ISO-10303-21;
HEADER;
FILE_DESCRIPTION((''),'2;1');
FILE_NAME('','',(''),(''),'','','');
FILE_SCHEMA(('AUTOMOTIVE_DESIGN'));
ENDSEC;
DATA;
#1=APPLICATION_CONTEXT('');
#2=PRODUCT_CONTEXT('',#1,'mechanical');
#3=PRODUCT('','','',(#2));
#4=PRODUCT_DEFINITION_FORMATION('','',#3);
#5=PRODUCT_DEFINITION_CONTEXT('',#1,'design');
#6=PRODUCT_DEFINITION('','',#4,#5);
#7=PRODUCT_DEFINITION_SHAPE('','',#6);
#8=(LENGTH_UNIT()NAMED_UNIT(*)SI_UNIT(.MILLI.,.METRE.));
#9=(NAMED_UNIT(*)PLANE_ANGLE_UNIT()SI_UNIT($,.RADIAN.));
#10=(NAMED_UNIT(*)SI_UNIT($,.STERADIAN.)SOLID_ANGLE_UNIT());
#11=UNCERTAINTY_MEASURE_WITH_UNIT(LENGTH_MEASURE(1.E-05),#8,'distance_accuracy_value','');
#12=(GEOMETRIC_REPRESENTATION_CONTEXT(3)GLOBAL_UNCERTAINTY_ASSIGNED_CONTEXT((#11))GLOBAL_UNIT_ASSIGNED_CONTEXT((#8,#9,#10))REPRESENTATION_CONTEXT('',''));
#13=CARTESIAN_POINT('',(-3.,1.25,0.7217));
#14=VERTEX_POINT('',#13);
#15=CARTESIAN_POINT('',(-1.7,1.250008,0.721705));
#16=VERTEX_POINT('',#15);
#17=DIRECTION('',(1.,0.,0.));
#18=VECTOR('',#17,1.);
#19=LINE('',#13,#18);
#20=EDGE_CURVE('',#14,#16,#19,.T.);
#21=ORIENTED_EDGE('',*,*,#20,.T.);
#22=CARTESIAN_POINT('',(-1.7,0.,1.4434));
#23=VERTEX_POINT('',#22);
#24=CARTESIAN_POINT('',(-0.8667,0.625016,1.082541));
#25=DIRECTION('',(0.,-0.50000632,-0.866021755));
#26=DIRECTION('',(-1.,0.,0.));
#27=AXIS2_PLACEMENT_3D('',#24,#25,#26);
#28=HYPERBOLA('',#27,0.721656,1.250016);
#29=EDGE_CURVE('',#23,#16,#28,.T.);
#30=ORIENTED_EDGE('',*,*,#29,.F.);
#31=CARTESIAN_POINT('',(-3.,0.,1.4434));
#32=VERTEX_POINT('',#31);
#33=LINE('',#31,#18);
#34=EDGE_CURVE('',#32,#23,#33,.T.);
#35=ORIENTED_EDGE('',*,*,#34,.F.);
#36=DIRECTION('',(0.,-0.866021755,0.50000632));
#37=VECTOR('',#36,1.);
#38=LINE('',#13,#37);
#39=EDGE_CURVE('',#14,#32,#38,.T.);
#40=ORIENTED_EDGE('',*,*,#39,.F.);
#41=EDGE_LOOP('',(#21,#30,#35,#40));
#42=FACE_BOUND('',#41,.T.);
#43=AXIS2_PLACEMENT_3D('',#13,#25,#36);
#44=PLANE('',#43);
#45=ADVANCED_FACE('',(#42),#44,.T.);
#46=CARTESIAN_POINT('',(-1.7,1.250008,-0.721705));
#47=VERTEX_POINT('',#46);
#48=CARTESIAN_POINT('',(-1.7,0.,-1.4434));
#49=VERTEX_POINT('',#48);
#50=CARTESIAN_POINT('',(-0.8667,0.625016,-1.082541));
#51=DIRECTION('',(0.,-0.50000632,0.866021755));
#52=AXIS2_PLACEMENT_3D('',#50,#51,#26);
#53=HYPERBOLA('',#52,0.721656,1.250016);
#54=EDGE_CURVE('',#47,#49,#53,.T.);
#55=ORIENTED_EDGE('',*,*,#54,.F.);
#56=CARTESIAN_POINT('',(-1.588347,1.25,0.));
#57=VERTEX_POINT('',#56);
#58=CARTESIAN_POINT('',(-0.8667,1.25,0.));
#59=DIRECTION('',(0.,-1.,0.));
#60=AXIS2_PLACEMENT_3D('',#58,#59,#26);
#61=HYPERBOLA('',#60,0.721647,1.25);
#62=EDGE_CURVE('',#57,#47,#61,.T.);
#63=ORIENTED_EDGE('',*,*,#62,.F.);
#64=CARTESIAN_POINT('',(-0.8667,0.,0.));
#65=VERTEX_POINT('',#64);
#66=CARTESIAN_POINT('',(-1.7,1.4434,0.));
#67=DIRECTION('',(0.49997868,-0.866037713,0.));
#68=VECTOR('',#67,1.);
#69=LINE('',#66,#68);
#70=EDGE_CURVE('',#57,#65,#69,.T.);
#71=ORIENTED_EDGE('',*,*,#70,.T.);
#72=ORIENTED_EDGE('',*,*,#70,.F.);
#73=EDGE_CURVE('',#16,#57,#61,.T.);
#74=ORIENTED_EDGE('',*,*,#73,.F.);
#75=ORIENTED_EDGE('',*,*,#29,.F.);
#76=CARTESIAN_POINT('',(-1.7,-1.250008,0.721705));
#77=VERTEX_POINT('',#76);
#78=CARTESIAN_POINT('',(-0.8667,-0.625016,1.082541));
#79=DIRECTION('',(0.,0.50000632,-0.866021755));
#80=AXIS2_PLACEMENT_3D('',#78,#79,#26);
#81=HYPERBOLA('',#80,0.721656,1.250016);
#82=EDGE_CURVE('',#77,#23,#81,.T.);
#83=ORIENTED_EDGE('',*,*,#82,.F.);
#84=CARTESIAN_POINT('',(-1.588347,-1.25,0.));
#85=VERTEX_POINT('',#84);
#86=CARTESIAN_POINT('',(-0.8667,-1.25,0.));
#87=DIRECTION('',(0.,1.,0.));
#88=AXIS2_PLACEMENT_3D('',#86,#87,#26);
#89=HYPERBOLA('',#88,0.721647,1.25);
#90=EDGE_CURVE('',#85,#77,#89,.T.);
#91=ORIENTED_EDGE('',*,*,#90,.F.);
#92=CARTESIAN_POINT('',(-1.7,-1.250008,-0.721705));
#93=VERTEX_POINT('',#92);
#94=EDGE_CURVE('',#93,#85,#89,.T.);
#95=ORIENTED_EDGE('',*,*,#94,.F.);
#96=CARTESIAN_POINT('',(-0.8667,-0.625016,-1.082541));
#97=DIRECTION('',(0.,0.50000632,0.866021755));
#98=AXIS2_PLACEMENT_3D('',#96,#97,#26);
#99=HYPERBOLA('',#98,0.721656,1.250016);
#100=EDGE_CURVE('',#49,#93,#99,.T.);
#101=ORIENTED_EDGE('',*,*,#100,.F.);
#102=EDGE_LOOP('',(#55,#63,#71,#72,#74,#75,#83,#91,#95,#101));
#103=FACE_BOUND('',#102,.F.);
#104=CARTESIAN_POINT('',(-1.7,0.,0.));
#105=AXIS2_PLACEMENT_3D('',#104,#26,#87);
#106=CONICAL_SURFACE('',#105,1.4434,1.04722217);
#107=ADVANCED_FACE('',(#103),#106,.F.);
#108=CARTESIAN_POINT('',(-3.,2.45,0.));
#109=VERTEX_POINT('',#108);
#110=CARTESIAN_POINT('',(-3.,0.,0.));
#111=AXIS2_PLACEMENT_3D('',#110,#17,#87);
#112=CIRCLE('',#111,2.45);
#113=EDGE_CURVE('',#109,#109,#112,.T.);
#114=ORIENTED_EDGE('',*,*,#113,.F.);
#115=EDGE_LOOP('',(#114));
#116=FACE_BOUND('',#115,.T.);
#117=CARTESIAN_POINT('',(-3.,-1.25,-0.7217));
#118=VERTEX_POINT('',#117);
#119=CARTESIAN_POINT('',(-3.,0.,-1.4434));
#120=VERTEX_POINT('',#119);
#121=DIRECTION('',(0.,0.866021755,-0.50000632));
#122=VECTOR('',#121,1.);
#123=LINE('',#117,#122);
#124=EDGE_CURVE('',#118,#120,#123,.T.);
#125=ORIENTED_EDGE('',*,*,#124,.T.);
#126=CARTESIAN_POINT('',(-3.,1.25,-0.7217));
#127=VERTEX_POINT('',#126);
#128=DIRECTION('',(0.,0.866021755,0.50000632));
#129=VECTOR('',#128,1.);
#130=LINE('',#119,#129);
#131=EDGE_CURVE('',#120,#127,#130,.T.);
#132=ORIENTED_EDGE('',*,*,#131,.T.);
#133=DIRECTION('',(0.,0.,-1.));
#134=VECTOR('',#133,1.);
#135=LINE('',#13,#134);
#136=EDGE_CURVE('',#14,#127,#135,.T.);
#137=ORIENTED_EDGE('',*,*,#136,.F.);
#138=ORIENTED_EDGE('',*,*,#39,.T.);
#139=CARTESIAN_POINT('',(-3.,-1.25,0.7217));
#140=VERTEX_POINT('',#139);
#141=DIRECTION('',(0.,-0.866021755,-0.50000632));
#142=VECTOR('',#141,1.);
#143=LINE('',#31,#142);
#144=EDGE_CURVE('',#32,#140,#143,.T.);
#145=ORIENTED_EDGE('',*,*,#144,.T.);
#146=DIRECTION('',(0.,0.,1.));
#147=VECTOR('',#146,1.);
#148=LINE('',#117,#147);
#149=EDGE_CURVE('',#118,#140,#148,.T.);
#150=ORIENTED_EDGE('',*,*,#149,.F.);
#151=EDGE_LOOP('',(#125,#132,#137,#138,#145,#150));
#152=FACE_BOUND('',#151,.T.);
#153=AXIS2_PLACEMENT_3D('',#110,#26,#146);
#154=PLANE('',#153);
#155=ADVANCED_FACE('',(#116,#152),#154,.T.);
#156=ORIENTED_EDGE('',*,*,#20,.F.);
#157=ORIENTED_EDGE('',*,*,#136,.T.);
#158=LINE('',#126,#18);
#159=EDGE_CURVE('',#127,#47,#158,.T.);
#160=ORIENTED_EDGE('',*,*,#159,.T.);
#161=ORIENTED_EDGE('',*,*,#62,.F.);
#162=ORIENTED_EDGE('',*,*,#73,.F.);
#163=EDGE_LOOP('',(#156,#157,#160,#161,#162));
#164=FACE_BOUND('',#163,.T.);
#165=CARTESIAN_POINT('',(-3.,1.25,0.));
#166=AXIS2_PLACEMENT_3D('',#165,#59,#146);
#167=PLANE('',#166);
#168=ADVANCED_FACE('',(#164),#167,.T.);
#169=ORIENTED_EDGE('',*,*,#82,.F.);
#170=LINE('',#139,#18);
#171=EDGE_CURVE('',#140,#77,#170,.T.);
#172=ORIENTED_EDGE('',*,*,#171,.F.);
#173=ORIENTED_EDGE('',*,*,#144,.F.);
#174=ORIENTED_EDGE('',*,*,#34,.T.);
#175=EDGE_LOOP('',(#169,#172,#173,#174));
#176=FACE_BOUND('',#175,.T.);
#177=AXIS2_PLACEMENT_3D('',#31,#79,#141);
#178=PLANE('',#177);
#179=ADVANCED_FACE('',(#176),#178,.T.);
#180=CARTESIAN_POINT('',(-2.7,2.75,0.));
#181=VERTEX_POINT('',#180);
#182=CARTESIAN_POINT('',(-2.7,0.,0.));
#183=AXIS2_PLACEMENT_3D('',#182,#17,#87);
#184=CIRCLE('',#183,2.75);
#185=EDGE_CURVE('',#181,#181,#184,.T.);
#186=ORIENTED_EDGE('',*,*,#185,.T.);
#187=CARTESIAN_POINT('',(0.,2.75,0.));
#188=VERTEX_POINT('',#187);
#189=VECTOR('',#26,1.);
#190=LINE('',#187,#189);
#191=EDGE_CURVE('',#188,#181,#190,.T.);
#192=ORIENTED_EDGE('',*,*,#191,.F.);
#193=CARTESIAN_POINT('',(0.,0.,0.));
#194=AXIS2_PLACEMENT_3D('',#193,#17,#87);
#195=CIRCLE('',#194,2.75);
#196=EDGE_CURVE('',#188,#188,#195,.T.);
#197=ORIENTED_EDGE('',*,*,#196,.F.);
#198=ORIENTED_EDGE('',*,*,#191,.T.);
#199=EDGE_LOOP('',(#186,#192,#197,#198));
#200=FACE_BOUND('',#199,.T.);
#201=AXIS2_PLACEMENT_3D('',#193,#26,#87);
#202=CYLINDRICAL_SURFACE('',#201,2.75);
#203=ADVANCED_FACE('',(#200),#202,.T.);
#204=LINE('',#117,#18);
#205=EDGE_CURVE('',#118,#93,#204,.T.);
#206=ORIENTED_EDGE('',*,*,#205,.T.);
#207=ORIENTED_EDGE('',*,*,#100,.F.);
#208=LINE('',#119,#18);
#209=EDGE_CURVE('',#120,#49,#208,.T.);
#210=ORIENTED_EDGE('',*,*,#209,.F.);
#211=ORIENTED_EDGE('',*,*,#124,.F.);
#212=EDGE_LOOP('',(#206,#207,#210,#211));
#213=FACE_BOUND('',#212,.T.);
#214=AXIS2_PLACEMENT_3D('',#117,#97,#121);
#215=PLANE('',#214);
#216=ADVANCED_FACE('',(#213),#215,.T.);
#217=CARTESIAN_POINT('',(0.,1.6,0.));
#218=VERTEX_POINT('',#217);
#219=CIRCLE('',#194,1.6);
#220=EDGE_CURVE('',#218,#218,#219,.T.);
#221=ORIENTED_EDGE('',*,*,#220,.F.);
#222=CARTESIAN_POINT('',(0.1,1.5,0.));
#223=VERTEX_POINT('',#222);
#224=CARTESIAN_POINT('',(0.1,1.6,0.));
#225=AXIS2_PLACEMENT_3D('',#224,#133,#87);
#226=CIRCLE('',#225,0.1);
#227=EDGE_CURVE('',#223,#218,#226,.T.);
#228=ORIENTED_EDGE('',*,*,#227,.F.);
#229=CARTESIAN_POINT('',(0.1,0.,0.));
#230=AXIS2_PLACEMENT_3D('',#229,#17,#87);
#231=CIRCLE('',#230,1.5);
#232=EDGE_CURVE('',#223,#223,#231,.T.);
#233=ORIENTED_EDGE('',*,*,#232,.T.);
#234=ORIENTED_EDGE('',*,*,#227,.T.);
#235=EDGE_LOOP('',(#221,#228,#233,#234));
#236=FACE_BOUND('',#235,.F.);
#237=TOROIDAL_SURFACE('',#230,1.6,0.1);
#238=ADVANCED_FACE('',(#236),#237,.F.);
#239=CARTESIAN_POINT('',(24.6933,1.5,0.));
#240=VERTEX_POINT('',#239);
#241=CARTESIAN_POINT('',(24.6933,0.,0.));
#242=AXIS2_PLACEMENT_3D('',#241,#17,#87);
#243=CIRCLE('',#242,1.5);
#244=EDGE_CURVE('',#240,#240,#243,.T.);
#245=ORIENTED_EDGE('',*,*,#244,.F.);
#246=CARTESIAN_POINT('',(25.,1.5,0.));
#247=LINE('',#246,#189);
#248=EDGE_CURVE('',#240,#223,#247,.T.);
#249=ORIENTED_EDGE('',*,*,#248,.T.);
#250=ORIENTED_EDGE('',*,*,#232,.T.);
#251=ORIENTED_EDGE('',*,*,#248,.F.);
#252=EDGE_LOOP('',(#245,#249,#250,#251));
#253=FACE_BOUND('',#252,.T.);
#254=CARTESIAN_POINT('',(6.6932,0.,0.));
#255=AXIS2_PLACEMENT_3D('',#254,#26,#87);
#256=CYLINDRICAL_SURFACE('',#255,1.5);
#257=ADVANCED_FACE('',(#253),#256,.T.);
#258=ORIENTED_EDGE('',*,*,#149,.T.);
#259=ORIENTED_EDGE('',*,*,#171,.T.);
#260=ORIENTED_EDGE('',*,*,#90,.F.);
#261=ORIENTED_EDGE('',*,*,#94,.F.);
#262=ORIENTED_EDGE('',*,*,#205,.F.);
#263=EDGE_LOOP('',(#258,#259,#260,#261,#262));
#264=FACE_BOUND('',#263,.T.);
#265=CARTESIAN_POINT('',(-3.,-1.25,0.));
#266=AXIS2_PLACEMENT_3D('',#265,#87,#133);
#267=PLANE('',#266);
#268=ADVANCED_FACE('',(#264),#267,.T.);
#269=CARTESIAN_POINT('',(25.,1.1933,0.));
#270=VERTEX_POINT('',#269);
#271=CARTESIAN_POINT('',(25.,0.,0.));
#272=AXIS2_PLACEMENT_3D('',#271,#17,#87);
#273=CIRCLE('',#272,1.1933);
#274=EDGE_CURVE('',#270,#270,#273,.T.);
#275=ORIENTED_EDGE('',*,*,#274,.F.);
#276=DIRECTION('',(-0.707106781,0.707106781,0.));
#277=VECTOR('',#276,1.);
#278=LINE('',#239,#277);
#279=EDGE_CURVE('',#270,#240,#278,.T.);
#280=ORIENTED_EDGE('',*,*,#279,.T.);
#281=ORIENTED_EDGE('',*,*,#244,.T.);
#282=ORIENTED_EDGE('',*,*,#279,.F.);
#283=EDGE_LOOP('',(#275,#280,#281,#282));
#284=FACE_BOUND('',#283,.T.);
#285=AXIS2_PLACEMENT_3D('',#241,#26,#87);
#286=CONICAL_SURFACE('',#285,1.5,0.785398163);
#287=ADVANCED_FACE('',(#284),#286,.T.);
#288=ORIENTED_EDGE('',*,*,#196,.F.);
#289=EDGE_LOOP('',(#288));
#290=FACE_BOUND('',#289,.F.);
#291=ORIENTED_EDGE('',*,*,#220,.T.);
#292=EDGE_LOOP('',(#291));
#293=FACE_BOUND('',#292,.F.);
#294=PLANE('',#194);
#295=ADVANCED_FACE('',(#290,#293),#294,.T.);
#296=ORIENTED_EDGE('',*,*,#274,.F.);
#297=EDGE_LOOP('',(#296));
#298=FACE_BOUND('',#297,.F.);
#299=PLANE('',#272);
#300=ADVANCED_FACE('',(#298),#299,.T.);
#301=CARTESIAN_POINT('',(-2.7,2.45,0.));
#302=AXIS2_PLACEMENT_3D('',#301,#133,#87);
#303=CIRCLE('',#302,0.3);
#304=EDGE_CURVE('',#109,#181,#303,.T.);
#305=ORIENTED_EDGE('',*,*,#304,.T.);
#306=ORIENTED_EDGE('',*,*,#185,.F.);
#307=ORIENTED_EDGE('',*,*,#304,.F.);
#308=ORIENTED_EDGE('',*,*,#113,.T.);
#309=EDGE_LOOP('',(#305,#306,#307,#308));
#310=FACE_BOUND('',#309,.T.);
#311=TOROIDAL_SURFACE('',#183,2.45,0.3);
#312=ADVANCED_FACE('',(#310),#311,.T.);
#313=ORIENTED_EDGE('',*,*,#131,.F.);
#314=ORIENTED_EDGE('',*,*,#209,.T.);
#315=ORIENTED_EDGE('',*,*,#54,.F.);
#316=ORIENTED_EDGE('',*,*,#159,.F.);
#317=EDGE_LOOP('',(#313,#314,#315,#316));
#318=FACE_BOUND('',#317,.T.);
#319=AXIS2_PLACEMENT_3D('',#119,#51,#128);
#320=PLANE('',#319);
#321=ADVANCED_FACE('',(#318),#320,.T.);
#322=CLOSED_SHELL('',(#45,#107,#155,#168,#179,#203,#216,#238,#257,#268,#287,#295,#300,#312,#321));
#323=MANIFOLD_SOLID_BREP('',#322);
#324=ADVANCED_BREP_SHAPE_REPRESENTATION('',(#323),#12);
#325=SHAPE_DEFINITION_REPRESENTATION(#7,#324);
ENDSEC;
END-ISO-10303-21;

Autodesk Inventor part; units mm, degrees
ref_plane "YZ Plane" through (0, 0, 0) normal (1, 0, 0) x (0, 1, 0)
ref_plane "XZ Plane" through (0, 0, 0) normal (0, 1, 0) x (-1, 0, 0)
sketch "Sketch1" plane through (0, 0, 0) normal (0, 0, 1) x (1, 0, 0)
  line L0 (-0.8667, 0) -> (25, 0)
  line L1 (25, 0) -> (25, 1.5)
  line L2 (25, 1.5) -> (7, 1.5)
  line L3 (7, 1.5) -> (6.6932, 1.5)
  line L4 (6.6932, 1.5) -> (0, 1.5)
  line L5 (0, 1.5) -> (0, 2.75)
  line L6 (0, 2.75) -> (-3, 2.75)
  line L7 (-3, 2.75) -> (-3, 1.4434)
  line L8 (-3, 1.4434) -> (-1.7, 1.4434)
  line L9 (-1.7, 1.4434) -> (-0.8667, 0)
  line L10 (-8.6, 0) -> (30.6, 0) projected
  line L11 (0, -0.55) -> (0, 3.3) projected
  line L12 (7, 1.5) -> (0, 1.5) construction
  dimension "d1" = 18
  dimension "d2" = 0.3068
  dimension "d3" = 3
  dimension "d4" = 1.3
  dimension "d5" = 60
  dimension "d6" = 3
  dimension "d7" = 3
  dimension "d8" = 2.8868
  dimension "d9" = 5.5
  dimension "d26" = 25
revolve "Body" add sketch "Sketch1" angle 360 about axis through (-0.8667, 0, 0) along (1, 0, 0)
sketch "Sketch2" plane through (-3, 0, 0) normal (-1, 0, 0) x (0, 0, 1)
  circle A0 centre (0, 0) radius 1.4434 projected
  line L0 (0, -3.85) -> (0, 3.85) projected
  line L1 (-3.85, 0) -> (3.85, 0) projected
  line L2 (1.4434, 0) -> (0.7217, -1.25)
  line L3 (0.7217, -1.25) -> (-0.7217, -1.25)
  line L4 (-0.7217, -1.25) -> (-1.4434, 0)
  line L5 (-1.4434, 0) -> (-0.7217, 1.25)
  line L6 (-0.7217, 1.25) -> (0.7217, 1.25)
  line L7 (0.7217, 1.25) -> (1.4434, 0)
extrude "Slot" add sketch "Sketch2" against normal up to next contours L7 A0 | A0 L2 | L6 L0 A0 | A0 L0 L3 | L0 L6 A0 | A0 L3 L0 | L4 A0 | A0 L5
fillet "Fillet1" radius 0.3 1 edges at (-3, -2.75, 0)
thread "Thread" size "M3x0.5" class "6g" standard "ISO Metric profile" length 18
chamfer "Chamfer1" distance 0.3067 distance2 0.3067 1 edges at (25, -1.5, 0) measured on face at (25, 0.2885, 0.9187)
ref_plane "Work Plane1" through (29, 0, 0) normal (0, -1, 0) x (1, 0, 0)
fillet "Fillet2" radius 0.1 1 edges at (0, -1.5, 0)
equation "\"d30\" = R"
equation "\"d17\" = RR"
equation "\"d13\" = GEL"
equation "\"d15\" = -0.5 * SPD + 0.5 * GD"
equation "\"d16\" = GUL"
equation "\"d1\" = GEL"
equation "\"d3\" = KOH"
equation "\"d4\" = INTI"
equation "\"d6\" = GD"
equation "\"d7\" = BDM"
equation "\"d8\" = 1.1547 * SW"
equation "\"d9\" = KOD"
equation "\"d26\" = NLG"
equation "\"GD\" = 3"
equation "\"NLG\" = 25"
equation "\"GEL\" = 18"
equation "\"KOD\" = 5.5"
equation "\"KOH\" = 3"
equation "\"INTI\" = 1.3"
equation "\"GAL\" = 0.61345 * PTC"
equation "\"GUL\" = 0.61345 * PTC"
equation "\"BDM\" = NND"
equation "\"SW\" = 2.5"
equation "\"RR\" = 0.3"
equation "\"SPD\" = NND - 1.2269 * PTC"
equation "\"R\" = 0.1"
equation "\"TOA\" = 30deg"
equation "\"GD1\" = THREADDIA - 1.2269 * PTC"
equation "\"THREADDIA\" = 3"
equation "\"FAWI\" = 45deg"
equation "\"PTC\" = 0.5"
equation "\"NND\" = 3"
equation "\"E0\" = 1.155 * SW"
properties part number "ISO 4762  - M3 x 25" material "Stainless Steel, 440C"
